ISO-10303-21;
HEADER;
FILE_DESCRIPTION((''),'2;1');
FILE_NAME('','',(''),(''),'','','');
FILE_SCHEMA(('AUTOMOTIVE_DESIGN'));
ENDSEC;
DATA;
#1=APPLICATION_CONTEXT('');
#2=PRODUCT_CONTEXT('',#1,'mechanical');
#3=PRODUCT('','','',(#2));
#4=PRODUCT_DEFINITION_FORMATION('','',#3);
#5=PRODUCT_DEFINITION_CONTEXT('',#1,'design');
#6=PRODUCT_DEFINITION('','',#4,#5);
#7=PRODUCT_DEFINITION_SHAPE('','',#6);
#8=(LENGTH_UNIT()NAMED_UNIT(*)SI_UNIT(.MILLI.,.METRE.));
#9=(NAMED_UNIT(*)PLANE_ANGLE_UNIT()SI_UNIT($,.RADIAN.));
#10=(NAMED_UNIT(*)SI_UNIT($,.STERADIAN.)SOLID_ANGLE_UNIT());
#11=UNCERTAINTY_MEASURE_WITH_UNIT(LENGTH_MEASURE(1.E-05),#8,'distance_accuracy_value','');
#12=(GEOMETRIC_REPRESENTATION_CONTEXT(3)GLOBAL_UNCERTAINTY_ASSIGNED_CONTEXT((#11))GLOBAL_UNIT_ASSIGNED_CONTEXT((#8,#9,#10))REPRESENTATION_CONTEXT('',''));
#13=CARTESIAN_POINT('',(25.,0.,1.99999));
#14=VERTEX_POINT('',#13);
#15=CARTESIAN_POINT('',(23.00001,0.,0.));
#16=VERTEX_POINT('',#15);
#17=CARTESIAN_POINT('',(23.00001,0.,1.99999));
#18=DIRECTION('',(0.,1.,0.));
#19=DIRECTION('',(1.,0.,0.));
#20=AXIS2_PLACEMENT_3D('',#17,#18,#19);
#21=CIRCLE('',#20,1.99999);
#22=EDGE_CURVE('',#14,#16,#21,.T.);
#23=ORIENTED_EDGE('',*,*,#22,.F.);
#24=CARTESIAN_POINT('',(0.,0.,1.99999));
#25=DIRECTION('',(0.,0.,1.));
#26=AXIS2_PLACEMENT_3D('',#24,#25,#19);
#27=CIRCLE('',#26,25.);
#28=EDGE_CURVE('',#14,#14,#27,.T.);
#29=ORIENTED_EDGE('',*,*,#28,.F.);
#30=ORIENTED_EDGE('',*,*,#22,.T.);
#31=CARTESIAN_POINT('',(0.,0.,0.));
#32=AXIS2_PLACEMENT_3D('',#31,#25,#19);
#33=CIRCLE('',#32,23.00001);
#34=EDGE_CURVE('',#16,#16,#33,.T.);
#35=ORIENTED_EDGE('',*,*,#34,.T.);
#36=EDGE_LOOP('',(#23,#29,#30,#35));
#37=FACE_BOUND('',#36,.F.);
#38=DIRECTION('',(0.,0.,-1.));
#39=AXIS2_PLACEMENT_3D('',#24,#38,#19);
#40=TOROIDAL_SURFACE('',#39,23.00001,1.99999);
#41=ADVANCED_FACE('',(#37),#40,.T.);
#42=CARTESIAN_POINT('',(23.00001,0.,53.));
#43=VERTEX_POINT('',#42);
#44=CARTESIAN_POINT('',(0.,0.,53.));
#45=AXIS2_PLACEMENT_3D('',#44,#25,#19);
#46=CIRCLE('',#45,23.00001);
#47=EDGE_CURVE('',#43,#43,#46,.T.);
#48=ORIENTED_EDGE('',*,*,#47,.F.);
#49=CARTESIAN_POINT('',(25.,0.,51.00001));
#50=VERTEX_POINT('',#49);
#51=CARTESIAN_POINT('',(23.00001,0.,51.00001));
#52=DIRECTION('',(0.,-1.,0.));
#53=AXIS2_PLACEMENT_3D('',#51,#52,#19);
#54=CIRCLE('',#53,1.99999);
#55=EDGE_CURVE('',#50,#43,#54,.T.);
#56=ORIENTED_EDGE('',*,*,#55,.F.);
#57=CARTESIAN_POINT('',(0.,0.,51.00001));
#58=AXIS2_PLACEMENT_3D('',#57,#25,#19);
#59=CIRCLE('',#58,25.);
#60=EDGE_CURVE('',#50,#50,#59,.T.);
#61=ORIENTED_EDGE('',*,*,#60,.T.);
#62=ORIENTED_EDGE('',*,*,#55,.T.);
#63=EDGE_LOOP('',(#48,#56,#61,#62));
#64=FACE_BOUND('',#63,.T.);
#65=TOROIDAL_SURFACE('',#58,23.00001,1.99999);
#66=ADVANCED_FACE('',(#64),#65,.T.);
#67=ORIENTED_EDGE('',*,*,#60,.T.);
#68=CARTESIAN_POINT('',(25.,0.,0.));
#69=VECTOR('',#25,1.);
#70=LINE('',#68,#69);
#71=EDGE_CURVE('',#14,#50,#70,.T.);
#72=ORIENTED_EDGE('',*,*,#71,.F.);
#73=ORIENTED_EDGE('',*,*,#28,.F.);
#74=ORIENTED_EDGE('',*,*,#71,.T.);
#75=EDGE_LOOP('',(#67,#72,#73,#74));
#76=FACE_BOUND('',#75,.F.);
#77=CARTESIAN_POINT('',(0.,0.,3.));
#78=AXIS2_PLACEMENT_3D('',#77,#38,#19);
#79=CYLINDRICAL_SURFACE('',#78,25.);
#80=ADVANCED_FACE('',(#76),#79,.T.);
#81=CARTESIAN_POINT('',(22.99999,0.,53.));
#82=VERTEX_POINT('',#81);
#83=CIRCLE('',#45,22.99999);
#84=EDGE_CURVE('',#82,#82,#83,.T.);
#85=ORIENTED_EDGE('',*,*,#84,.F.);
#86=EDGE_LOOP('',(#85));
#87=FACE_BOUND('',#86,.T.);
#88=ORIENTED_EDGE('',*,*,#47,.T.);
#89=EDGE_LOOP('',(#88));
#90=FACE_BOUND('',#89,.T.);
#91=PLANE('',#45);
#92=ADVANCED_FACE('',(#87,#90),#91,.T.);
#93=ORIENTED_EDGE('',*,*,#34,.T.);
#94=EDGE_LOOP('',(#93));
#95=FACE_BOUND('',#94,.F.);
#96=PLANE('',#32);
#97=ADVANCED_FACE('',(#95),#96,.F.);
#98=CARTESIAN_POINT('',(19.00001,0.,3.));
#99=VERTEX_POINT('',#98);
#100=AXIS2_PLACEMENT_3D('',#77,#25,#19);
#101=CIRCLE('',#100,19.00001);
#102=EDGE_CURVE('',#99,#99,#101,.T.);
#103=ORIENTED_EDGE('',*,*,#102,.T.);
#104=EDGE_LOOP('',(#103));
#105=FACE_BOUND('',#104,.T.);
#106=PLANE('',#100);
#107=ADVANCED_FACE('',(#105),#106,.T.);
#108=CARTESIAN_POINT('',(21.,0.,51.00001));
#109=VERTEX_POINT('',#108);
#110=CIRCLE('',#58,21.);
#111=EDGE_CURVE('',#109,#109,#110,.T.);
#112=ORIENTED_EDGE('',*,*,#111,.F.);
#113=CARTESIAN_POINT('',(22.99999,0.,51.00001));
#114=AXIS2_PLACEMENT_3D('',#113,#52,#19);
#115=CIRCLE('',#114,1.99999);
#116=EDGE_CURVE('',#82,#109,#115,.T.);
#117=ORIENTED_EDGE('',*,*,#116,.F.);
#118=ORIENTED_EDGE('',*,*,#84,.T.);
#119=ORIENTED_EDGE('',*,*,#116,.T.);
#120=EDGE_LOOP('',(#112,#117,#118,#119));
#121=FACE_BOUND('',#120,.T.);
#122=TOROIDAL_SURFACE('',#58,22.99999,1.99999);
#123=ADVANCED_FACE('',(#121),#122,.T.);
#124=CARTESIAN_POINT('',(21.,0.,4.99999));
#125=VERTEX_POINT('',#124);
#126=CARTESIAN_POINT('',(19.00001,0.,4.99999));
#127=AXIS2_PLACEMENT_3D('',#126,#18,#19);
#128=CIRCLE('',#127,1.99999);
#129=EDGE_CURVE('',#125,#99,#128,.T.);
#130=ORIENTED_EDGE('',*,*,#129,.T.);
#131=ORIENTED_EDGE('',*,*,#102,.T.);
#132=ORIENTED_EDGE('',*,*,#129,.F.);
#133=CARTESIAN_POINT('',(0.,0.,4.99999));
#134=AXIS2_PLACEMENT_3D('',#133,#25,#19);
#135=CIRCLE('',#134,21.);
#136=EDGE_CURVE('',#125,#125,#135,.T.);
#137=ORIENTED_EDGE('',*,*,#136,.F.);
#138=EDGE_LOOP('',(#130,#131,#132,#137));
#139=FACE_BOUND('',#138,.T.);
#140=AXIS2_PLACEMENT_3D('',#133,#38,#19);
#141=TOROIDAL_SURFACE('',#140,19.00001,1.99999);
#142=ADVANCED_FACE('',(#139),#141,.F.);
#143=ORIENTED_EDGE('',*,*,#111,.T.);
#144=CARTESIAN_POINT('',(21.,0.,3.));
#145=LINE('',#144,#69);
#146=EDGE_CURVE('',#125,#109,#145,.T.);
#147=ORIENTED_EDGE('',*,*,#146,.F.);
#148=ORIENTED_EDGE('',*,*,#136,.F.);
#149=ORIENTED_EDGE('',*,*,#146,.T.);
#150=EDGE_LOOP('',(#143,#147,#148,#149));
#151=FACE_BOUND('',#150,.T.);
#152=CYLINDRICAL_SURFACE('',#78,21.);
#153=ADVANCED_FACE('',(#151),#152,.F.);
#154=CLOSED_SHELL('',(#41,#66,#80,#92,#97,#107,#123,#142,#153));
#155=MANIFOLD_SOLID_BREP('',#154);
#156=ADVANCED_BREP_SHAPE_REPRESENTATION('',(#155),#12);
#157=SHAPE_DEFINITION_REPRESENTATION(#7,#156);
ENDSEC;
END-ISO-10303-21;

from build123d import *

# Parameters (mm, degrees)
F0_R     = 25
F1_DEPTH = 3
F2_R     = 25
F2_R_2   = 21
F3_DEPTH = 50
F4_R     = 1.99999


# Not quite as in the source:
# - a fillet or chamfer is up to 0.001 mm smaller than in the source, because OpenCascade refuses the exact size


with BuildPart() as f1:
    # F0 (on Top) → F1 (new body)
    with BuildSketch(Plane.XY):
        Circle(F0_R)
    extrude(amount=F1_DEPTH)

    # F2 (on face) → F3 (join)
    with BuildSketch(Plane.XY.offset(3)):
        Circle(F2_R)
        Circle(F2_R_2, mode=Mode.SUBTRACT)
    extrude(amount=F3_DEPTH)

    # F4 (radius 2 in the source; OpenCascade refuses exactly that, so slightly less here)
    f4_edges = [f1.edges().sort_by_distance(p)[0] for p in [
        (-25, 0, 53),
        (-21, 0, 53),
        (-21, 0, 3),
        (-25, 0, 0),
    ]]
    fillet(f4_edges, radius=F4_R)


solid = f1.part
